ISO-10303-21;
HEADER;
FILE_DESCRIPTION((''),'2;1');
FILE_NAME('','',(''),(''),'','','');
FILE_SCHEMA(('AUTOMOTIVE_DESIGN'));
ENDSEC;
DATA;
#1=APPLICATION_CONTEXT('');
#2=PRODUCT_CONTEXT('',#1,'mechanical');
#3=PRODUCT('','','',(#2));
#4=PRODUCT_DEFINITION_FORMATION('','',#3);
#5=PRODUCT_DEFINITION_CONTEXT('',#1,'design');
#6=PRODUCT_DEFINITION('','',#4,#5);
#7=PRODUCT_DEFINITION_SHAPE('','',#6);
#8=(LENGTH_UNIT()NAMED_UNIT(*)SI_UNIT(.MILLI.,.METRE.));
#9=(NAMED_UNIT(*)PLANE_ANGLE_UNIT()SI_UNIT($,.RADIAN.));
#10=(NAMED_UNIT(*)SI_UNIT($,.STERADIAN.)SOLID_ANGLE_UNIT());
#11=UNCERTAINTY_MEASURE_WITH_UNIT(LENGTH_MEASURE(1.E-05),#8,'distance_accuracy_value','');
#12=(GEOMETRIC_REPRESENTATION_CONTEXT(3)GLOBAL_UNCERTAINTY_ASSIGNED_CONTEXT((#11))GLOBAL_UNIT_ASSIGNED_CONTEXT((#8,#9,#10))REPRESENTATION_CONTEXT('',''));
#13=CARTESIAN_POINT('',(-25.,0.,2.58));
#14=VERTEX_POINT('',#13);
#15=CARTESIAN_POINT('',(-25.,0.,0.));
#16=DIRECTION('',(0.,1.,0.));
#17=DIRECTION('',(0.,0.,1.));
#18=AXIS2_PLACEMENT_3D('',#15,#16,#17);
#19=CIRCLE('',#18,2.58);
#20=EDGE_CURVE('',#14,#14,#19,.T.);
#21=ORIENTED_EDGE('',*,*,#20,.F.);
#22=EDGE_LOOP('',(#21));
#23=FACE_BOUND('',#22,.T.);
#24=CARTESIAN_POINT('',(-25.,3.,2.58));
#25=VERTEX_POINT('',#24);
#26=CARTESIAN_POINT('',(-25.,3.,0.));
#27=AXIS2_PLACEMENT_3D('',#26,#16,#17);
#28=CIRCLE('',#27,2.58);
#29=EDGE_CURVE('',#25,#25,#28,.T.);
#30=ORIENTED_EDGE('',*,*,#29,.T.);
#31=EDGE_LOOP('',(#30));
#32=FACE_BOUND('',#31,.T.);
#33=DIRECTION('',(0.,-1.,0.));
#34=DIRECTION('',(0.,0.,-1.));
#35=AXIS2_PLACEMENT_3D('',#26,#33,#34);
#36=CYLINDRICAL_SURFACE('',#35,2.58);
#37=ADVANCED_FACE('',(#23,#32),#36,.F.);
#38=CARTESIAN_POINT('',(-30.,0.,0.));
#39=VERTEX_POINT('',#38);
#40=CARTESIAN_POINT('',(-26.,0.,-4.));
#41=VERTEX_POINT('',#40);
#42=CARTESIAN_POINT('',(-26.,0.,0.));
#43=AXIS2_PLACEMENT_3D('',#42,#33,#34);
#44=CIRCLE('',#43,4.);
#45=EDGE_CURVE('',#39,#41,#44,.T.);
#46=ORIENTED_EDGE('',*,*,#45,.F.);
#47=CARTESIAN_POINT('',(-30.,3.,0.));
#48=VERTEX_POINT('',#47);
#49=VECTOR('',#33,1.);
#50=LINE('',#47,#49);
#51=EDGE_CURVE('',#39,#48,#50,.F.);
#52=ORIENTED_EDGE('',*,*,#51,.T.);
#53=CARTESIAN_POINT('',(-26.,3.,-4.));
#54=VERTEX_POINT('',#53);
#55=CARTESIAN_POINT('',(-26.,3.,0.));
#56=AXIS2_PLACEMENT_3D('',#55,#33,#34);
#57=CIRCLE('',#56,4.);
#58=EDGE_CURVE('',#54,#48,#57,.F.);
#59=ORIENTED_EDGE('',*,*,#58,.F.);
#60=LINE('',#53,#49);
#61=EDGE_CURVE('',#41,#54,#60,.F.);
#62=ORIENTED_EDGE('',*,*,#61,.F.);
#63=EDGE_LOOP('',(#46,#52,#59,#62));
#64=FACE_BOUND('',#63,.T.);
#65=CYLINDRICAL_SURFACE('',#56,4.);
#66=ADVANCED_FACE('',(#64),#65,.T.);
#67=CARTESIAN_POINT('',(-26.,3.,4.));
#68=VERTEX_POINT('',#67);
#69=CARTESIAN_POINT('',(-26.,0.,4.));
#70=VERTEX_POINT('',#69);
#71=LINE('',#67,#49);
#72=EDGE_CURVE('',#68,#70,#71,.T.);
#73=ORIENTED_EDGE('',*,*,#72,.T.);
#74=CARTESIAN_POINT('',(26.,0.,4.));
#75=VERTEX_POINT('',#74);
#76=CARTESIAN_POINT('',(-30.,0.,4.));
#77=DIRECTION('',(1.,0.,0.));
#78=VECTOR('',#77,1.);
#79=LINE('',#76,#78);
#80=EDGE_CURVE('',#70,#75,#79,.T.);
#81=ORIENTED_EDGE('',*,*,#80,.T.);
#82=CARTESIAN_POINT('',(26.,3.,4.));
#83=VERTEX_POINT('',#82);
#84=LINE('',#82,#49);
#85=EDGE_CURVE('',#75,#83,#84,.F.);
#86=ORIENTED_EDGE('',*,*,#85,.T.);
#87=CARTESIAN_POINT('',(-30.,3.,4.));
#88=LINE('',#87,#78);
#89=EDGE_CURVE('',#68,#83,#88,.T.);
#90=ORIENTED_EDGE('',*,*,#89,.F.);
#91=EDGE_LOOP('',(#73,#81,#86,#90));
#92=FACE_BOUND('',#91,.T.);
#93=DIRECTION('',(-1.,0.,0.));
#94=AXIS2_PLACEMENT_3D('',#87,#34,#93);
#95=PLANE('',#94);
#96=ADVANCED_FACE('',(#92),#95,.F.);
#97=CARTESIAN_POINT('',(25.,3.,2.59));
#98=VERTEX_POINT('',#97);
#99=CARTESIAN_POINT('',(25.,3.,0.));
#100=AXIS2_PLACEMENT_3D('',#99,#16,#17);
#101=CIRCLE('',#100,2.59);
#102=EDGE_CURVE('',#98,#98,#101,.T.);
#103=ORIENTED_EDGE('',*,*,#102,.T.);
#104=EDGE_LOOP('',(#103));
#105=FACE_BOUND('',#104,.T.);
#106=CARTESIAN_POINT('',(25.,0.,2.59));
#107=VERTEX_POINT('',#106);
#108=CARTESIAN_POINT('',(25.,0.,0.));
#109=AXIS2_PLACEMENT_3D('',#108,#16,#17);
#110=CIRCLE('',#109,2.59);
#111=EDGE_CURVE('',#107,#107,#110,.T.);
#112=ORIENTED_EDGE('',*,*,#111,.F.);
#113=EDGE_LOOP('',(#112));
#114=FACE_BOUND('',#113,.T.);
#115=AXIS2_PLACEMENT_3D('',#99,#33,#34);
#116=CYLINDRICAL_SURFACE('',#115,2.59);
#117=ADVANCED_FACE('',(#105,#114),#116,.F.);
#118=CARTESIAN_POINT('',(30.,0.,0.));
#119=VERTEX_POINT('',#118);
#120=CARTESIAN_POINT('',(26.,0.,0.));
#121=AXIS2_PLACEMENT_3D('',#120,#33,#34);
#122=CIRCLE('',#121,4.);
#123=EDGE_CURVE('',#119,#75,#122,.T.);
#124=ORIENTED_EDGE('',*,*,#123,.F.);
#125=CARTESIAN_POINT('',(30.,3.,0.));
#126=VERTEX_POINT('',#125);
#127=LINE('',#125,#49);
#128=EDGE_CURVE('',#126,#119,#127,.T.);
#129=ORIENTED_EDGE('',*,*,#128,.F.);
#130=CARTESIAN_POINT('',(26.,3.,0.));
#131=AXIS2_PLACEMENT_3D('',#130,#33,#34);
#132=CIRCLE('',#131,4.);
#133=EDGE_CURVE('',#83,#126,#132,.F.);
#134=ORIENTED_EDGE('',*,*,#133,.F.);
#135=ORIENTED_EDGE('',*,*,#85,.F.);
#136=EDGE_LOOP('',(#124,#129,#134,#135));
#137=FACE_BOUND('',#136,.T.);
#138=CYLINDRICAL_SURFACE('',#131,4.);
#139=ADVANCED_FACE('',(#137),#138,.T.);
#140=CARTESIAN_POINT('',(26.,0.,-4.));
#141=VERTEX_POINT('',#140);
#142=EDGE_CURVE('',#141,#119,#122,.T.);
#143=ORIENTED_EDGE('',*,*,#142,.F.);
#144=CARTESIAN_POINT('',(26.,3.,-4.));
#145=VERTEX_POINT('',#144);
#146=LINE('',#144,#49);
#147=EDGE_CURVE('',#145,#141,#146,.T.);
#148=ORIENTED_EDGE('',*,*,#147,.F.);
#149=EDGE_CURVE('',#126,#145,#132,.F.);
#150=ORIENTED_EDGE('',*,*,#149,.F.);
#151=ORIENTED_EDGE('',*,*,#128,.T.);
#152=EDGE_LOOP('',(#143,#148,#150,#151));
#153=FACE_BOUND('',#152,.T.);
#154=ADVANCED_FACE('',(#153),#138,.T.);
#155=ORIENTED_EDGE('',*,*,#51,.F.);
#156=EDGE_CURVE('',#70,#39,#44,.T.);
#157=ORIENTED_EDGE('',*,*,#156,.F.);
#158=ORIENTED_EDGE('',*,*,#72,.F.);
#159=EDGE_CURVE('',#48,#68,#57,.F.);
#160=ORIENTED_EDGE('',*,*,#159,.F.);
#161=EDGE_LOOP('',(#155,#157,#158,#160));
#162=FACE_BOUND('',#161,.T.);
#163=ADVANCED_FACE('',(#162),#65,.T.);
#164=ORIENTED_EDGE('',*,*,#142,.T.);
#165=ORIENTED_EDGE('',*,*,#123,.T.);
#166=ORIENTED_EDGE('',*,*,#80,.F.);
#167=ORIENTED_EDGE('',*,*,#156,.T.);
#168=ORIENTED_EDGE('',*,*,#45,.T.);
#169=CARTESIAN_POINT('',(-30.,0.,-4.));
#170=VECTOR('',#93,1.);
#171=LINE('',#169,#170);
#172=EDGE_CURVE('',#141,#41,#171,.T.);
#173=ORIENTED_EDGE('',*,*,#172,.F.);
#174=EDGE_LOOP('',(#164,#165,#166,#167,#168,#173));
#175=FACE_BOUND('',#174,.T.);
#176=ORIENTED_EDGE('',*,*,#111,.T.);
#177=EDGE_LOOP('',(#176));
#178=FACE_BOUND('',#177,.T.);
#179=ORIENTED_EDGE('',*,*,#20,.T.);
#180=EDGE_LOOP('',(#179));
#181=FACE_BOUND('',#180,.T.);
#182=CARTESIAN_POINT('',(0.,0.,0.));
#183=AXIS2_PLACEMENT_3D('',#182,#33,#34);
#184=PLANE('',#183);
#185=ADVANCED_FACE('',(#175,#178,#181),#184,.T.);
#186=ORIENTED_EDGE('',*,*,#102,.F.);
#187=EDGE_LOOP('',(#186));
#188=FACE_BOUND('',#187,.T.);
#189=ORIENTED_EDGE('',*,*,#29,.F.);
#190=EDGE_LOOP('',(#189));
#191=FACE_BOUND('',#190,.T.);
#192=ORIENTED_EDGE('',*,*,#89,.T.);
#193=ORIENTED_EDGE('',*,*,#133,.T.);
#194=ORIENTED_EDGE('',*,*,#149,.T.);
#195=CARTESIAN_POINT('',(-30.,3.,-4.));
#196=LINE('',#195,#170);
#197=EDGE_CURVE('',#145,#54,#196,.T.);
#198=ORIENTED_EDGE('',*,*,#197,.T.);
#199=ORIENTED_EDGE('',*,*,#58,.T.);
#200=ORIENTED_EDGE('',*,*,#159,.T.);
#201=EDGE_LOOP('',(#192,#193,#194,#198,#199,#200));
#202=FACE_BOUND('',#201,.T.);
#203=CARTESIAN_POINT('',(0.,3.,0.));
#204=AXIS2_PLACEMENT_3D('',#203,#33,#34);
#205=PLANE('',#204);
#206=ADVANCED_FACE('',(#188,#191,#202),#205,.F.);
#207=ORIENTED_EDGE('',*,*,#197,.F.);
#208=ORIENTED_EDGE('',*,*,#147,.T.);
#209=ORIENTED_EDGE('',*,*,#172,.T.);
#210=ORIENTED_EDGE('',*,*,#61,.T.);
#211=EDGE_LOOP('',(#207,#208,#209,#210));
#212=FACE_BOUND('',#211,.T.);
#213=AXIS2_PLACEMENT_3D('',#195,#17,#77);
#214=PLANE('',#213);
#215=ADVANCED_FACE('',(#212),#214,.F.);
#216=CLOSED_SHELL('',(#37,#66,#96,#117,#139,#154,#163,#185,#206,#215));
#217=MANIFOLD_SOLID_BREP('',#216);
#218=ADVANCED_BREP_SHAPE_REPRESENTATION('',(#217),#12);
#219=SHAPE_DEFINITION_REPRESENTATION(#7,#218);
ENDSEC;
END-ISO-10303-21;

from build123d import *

# Parameters (mm, degrees)
SKETCH1_W           = 60
SKETCH1_H           = 8
SKETCH1_R           = 2.58
SKETCH1_R_2         = 2.59
BOSS_EXTRUDE1_DEPTH = 3
REDONDEO2_R         = 4


with BuildPart() as part:
    # Sketch1 → Boss-Extrude1 (new body)
    with BuildSketch(Plane(origin=(0, 0, 0), x_dir=(1, 0, 0), z_dir=(0, 1, 0))):
        Rectangle(SKETCH1_W, SKETCH1_H)
        with Locations(Location((-25, 0, 0), (0, 0, 270))):
            Circle(SKETCH1_R, mode=Mode.SUBTRACT)
        with Locations(Location((25, 0, 0), (0, 0, 270))):
            Circle(SKETCH1_R_2, mode=Mode.SUBTRACT)
    extrude(amount=BOSS_EXTRUDE1_DEPTH)

    # Redondeo2
    redondeo2_edges = [part.edges().sort_by_distance(p)[0] for p in [
        (30, 1.5, -4),
        (30, 1.5, 4),
        (-30, 1.5, -4),
        (-30, 1.5, 4),
    ]]
    fillet(redondeo2_edges, radius=REDONDEO2_R - 0.0001)  # a hair under: the kernel refuses the full size


solid = part.part
